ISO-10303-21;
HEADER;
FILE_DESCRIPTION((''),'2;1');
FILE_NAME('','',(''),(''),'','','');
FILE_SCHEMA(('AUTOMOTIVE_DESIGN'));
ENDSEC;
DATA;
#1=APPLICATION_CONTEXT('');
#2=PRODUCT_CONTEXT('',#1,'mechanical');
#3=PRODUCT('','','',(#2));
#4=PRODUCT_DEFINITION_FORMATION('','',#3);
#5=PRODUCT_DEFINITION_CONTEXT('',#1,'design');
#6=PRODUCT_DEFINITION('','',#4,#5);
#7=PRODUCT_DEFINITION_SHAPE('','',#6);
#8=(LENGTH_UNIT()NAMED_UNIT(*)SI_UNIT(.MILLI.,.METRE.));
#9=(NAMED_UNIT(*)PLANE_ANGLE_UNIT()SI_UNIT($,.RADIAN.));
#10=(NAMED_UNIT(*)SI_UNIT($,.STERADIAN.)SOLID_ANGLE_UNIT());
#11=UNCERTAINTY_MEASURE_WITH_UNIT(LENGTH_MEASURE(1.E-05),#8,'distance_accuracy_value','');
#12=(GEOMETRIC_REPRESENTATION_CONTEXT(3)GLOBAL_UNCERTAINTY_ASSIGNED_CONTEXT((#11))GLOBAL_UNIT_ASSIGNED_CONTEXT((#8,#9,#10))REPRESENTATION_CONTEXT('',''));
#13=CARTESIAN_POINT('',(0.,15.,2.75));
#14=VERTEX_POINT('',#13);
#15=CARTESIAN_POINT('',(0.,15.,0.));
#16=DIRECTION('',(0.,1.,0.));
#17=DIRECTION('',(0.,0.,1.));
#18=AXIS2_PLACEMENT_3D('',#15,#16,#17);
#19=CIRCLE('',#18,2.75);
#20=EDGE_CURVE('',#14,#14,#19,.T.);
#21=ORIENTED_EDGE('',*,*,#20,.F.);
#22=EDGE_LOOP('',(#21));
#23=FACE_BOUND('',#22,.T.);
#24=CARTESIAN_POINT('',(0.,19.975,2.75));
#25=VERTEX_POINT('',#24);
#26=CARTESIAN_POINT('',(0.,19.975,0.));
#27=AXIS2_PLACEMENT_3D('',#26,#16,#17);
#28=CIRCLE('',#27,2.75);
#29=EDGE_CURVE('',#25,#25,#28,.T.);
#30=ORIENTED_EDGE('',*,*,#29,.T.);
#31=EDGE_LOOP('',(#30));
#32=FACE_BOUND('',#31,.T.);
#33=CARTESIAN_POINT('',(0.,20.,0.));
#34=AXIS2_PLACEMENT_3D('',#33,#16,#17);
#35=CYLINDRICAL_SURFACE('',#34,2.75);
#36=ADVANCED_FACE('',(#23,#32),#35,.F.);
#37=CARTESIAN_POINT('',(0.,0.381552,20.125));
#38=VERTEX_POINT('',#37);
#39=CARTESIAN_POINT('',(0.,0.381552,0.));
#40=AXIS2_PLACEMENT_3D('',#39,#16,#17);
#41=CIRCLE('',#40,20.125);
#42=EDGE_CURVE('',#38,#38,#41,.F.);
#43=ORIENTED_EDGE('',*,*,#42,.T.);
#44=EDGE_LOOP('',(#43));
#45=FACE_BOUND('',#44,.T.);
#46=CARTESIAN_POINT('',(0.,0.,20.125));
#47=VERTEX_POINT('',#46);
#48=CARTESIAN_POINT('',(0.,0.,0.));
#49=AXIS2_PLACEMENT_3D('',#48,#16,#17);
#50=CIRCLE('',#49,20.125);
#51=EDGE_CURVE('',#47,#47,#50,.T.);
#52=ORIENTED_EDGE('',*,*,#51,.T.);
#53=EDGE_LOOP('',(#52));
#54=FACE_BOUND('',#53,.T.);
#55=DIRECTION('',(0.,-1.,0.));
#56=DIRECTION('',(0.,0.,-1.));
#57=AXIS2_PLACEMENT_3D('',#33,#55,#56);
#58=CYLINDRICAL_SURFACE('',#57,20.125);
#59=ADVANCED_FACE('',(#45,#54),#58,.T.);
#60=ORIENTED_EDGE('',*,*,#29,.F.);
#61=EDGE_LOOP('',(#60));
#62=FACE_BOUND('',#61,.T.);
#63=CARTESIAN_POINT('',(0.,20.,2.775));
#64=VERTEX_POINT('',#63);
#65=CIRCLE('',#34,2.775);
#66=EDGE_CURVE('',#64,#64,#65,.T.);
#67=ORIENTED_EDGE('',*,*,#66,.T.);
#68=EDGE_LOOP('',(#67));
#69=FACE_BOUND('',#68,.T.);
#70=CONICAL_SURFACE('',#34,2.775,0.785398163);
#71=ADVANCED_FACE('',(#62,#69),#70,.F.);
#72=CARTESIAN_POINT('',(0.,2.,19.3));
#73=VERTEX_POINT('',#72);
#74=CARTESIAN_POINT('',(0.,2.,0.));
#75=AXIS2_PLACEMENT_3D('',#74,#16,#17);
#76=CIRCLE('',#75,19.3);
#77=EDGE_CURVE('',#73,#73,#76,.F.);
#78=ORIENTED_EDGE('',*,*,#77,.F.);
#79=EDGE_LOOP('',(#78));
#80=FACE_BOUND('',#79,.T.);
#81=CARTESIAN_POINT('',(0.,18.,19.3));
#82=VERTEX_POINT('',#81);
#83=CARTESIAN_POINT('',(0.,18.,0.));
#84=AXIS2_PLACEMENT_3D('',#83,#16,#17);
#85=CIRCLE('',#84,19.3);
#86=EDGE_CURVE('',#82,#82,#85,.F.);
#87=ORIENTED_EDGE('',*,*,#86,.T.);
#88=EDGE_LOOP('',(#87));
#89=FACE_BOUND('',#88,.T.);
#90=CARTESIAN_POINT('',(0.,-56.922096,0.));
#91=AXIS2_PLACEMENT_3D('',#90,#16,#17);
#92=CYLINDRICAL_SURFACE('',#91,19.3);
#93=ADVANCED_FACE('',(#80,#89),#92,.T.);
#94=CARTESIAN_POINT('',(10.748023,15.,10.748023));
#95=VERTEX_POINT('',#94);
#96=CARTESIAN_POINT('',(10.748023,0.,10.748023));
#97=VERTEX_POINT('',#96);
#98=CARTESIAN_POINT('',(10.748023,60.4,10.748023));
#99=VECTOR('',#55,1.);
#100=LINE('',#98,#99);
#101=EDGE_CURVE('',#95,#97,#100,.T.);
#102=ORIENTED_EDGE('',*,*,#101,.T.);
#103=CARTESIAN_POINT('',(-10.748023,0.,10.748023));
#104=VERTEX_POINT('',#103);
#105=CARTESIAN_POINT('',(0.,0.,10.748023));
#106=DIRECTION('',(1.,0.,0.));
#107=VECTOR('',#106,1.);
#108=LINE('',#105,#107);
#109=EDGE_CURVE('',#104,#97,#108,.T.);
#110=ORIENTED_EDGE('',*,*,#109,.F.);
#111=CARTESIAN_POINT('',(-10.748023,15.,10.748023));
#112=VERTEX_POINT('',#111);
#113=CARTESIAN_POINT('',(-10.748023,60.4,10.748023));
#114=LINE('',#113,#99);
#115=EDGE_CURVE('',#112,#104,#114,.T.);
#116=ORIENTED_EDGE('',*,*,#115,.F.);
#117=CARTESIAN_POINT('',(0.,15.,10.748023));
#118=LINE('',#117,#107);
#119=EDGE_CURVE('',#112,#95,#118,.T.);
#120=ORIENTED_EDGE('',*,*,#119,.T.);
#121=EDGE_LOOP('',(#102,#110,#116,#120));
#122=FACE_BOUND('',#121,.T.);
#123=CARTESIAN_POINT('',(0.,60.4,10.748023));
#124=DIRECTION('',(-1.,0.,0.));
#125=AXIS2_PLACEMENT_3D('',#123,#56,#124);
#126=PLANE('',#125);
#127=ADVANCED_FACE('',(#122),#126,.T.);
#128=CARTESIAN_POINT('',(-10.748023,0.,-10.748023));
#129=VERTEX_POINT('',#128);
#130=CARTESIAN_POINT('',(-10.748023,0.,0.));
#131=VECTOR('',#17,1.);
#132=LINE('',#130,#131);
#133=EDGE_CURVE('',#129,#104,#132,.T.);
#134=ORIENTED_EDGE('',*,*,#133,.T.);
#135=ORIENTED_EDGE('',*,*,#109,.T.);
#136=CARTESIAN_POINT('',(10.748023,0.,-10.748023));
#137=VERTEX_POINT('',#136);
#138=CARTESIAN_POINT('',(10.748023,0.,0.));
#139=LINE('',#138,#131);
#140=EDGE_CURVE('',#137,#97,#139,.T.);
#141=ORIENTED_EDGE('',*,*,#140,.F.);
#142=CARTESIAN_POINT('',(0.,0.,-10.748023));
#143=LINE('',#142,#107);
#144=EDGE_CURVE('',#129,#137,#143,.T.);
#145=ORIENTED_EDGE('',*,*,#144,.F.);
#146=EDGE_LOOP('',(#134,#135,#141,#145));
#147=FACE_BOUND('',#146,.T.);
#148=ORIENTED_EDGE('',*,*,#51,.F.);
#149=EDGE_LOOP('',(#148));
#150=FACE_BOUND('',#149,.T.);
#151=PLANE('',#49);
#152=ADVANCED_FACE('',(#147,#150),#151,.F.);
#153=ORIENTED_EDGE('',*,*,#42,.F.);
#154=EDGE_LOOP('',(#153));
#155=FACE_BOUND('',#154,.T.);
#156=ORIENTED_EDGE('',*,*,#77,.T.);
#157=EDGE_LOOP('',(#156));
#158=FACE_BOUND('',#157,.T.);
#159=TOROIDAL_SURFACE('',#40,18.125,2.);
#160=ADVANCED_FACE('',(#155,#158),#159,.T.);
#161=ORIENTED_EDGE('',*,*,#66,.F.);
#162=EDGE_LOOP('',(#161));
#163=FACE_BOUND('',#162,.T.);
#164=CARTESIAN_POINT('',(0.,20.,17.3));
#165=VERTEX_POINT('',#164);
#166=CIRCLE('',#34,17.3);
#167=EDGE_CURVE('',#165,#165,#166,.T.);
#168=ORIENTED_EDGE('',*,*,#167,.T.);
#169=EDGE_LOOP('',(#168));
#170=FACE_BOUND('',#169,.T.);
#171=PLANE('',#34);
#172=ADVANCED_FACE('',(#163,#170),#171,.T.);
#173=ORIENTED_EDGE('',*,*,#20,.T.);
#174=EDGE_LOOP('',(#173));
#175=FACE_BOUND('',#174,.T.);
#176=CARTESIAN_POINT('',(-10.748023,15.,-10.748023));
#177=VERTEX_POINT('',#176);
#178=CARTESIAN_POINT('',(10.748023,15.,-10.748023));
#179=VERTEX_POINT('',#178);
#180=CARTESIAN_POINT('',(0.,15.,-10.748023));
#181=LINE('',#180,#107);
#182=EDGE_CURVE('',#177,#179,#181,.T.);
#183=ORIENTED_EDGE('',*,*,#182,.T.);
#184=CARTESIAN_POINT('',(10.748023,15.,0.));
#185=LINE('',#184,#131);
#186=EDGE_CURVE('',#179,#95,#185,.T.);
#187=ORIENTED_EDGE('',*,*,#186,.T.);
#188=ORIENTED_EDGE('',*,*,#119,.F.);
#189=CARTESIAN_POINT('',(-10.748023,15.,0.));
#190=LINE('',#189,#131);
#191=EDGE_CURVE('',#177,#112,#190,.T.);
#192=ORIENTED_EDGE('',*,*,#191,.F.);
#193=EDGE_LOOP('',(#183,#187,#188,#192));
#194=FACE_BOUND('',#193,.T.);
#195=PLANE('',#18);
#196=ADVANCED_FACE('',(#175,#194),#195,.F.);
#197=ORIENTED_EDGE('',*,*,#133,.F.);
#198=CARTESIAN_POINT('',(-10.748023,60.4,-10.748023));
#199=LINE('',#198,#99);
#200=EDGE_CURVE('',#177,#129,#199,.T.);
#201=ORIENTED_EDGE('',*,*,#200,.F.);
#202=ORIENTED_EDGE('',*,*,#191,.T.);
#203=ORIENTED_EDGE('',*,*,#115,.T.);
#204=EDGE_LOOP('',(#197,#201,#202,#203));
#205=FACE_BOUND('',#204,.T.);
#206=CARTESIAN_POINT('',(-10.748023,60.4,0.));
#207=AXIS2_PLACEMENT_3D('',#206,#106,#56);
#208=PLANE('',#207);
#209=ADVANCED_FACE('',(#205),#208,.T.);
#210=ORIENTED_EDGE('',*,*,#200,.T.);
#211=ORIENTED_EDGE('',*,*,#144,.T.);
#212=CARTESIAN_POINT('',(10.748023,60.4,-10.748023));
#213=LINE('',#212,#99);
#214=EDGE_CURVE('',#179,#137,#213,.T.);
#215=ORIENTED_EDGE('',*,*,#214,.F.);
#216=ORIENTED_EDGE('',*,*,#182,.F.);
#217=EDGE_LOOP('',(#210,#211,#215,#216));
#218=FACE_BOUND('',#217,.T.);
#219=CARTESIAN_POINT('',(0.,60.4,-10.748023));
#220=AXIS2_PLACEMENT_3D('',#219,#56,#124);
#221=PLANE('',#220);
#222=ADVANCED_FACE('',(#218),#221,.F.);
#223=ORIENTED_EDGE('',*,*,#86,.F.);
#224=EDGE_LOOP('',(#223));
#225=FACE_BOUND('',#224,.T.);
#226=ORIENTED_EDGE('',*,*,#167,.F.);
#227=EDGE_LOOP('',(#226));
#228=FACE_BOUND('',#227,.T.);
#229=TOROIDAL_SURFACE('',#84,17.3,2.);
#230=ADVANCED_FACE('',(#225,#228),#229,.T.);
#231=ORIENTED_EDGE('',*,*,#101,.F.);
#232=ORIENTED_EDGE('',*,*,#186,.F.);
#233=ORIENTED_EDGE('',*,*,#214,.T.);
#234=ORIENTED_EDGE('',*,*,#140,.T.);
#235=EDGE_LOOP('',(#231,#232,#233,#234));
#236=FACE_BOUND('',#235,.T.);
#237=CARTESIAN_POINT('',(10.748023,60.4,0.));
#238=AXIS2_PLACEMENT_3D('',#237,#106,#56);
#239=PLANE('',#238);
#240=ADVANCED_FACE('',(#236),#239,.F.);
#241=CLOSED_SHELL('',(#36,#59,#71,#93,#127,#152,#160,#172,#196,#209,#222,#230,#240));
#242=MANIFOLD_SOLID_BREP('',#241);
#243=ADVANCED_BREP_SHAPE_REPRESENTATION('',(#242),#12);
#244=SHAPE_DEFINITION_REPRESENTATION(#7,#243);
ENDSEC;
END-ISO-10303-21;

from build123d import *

# Parameters (mm, degrees)
SKETCH1_R                      = 20.125
BOSS_EXTRUDE1_DEPTH            = 20
SKETCH12_W                     = 21.496046148
SKETCH12_H                     = 21.496046148
CUT_EXTRUDE1_DEPTH             = 15
CUT_EXTRUDE2_START             = -18
SKETCH16_R                     = 20.125
SKETCH16_R_2                   = 19.3
CUT_EXTRUDE2_DEPTH             = 18
FILLET3_R                      = 2
M5_CLEARANCE_HOLE1_D           = 5.5
M5_CLEARANCE_HOLE1_CSINK_D     = 5.55
M5_CLEARANCE_HOLE1_CSINK_ANGLE = 90


with BuildPart() as part:
    # Sketch1 → Boss-Extrude1 (new body)
    with BuildSketch(Plane(origin=(0, 0, 0), x_dir=(1, 0, 0), z_dir=(0, 1, 0))):
        with Locations(Location((0, 0, 0), (0, 0, 270))):
            Circle(SKETCH1_R)
    extrude(amount=BOSS_EXTRUDE1_DEPTH)

    # Sketch12 → Cut-Extrude1 (cut)
    with BuildSketch(Plane.XZ):
        Rectangle(SKETCH12_W, SKETCH12_H)
    extrude(amount=-CUT_EXTRUDE1_DEPTH, mode=Mode.SUBTRACT)

    # Sketch16 → Cut-Extrude2 (cut)
    with BuildSketch(Plane(origin=(0, 20, 0), x_dir=(1, 0, 0), z_dir=(0, 1, 0)).offset(CUT_EXTRUDE2_START)):
        with Locations(Location((0, 0, 0), (0, 0, 270))):
            Circle(SKETCH16_R)
        with Locations(Location((0, 0, 0), (0, 0, 270))):
            Circle(SKETCH16_R_2, mode=Mode.SUBTRACT)
    extrude(amount=CUT_EXTRUDE2_DEPTH, mode=Mode.SUBTRACT)

    # Fillet3
    # the kernel refuses this fillet: 2 mm, written as the material it takes off along each edge
    with BuildSketch(Plane(origin=(0, 20, 0), x_dir=(0, 0, 1), z_dir=(-1, 0, 0))) as fillet3_piece_1:
        with BuildLine():
            CenterArc((19.3 - FILLET3_R, -FILLET3_R), FILLET3_R, 0, 90)
            Line((19.3 - FILLET3_R, 0), (19.3 - FILLET3_R, FILLET3_R * 0.02))
            Line((19.3 - FILLET3_R, FILLET3_R * 0.02), (19.3 + FILLET3_R * 0.02, FILLET3_R * 0.02))
            Line((19.3 + FILLET3_R * 0.02, FILLET3_R * 0.02), (19.3 + FILLET3_R * 0.02, -FILLET3_R))
            Line((19.3 + FILLET3_R * 0.02, -FILLET3_R), (19.3, -FILLET3_R))
        make_face()
    revolve(axis=Axis((0, 20, 0), (0, 1, 0)), mode=Mode.SUBTRACT)
    with BuildSketch(Plane(origin=(0, 2, 0), x_dir=(0, 0, 1), z_dir=(-1, 0, 0))) as fillet3_piece_2:
        with BuildLine():
            CenterArc((18.125, -1.618448331), FILLET3_R, 0, 54.020199403)
            Line((19.3, 0), (19.3235, 0.032368967))
            ThreePointArc((19.3235, 0.032368967), (19.7125, 0.04), (20.125, 0.04))
            Line((20.125, 0.04), (20.165, 0))
            Line((20.165, 0), (20.165, -1.618448331))
            Line((20.165, -1.618448331), (20.125, -1.618448331))
        make_face()
    revolve(axis=Axis((0, 2, 0), (0, 1, 0)), mode=Mode.SUBTRACT)

    # M5 Clearance Hole1 (through all)
    with Locations(Plane(origin=(0, 20, 0), x_dir=(1, 0, 0), z_dir=(0, 1, 0))):
        with Locations((0, 0)):
            CounterSinkHole(M5_CLEARANCE_HOLE1_D / 2, M5_CLEARANCE_HOLE1_CSINK_D / 2, counter_sink_angle=M5_CLEARANCE_HOLE1_CSINK_ANGLE)


solid = part.part
